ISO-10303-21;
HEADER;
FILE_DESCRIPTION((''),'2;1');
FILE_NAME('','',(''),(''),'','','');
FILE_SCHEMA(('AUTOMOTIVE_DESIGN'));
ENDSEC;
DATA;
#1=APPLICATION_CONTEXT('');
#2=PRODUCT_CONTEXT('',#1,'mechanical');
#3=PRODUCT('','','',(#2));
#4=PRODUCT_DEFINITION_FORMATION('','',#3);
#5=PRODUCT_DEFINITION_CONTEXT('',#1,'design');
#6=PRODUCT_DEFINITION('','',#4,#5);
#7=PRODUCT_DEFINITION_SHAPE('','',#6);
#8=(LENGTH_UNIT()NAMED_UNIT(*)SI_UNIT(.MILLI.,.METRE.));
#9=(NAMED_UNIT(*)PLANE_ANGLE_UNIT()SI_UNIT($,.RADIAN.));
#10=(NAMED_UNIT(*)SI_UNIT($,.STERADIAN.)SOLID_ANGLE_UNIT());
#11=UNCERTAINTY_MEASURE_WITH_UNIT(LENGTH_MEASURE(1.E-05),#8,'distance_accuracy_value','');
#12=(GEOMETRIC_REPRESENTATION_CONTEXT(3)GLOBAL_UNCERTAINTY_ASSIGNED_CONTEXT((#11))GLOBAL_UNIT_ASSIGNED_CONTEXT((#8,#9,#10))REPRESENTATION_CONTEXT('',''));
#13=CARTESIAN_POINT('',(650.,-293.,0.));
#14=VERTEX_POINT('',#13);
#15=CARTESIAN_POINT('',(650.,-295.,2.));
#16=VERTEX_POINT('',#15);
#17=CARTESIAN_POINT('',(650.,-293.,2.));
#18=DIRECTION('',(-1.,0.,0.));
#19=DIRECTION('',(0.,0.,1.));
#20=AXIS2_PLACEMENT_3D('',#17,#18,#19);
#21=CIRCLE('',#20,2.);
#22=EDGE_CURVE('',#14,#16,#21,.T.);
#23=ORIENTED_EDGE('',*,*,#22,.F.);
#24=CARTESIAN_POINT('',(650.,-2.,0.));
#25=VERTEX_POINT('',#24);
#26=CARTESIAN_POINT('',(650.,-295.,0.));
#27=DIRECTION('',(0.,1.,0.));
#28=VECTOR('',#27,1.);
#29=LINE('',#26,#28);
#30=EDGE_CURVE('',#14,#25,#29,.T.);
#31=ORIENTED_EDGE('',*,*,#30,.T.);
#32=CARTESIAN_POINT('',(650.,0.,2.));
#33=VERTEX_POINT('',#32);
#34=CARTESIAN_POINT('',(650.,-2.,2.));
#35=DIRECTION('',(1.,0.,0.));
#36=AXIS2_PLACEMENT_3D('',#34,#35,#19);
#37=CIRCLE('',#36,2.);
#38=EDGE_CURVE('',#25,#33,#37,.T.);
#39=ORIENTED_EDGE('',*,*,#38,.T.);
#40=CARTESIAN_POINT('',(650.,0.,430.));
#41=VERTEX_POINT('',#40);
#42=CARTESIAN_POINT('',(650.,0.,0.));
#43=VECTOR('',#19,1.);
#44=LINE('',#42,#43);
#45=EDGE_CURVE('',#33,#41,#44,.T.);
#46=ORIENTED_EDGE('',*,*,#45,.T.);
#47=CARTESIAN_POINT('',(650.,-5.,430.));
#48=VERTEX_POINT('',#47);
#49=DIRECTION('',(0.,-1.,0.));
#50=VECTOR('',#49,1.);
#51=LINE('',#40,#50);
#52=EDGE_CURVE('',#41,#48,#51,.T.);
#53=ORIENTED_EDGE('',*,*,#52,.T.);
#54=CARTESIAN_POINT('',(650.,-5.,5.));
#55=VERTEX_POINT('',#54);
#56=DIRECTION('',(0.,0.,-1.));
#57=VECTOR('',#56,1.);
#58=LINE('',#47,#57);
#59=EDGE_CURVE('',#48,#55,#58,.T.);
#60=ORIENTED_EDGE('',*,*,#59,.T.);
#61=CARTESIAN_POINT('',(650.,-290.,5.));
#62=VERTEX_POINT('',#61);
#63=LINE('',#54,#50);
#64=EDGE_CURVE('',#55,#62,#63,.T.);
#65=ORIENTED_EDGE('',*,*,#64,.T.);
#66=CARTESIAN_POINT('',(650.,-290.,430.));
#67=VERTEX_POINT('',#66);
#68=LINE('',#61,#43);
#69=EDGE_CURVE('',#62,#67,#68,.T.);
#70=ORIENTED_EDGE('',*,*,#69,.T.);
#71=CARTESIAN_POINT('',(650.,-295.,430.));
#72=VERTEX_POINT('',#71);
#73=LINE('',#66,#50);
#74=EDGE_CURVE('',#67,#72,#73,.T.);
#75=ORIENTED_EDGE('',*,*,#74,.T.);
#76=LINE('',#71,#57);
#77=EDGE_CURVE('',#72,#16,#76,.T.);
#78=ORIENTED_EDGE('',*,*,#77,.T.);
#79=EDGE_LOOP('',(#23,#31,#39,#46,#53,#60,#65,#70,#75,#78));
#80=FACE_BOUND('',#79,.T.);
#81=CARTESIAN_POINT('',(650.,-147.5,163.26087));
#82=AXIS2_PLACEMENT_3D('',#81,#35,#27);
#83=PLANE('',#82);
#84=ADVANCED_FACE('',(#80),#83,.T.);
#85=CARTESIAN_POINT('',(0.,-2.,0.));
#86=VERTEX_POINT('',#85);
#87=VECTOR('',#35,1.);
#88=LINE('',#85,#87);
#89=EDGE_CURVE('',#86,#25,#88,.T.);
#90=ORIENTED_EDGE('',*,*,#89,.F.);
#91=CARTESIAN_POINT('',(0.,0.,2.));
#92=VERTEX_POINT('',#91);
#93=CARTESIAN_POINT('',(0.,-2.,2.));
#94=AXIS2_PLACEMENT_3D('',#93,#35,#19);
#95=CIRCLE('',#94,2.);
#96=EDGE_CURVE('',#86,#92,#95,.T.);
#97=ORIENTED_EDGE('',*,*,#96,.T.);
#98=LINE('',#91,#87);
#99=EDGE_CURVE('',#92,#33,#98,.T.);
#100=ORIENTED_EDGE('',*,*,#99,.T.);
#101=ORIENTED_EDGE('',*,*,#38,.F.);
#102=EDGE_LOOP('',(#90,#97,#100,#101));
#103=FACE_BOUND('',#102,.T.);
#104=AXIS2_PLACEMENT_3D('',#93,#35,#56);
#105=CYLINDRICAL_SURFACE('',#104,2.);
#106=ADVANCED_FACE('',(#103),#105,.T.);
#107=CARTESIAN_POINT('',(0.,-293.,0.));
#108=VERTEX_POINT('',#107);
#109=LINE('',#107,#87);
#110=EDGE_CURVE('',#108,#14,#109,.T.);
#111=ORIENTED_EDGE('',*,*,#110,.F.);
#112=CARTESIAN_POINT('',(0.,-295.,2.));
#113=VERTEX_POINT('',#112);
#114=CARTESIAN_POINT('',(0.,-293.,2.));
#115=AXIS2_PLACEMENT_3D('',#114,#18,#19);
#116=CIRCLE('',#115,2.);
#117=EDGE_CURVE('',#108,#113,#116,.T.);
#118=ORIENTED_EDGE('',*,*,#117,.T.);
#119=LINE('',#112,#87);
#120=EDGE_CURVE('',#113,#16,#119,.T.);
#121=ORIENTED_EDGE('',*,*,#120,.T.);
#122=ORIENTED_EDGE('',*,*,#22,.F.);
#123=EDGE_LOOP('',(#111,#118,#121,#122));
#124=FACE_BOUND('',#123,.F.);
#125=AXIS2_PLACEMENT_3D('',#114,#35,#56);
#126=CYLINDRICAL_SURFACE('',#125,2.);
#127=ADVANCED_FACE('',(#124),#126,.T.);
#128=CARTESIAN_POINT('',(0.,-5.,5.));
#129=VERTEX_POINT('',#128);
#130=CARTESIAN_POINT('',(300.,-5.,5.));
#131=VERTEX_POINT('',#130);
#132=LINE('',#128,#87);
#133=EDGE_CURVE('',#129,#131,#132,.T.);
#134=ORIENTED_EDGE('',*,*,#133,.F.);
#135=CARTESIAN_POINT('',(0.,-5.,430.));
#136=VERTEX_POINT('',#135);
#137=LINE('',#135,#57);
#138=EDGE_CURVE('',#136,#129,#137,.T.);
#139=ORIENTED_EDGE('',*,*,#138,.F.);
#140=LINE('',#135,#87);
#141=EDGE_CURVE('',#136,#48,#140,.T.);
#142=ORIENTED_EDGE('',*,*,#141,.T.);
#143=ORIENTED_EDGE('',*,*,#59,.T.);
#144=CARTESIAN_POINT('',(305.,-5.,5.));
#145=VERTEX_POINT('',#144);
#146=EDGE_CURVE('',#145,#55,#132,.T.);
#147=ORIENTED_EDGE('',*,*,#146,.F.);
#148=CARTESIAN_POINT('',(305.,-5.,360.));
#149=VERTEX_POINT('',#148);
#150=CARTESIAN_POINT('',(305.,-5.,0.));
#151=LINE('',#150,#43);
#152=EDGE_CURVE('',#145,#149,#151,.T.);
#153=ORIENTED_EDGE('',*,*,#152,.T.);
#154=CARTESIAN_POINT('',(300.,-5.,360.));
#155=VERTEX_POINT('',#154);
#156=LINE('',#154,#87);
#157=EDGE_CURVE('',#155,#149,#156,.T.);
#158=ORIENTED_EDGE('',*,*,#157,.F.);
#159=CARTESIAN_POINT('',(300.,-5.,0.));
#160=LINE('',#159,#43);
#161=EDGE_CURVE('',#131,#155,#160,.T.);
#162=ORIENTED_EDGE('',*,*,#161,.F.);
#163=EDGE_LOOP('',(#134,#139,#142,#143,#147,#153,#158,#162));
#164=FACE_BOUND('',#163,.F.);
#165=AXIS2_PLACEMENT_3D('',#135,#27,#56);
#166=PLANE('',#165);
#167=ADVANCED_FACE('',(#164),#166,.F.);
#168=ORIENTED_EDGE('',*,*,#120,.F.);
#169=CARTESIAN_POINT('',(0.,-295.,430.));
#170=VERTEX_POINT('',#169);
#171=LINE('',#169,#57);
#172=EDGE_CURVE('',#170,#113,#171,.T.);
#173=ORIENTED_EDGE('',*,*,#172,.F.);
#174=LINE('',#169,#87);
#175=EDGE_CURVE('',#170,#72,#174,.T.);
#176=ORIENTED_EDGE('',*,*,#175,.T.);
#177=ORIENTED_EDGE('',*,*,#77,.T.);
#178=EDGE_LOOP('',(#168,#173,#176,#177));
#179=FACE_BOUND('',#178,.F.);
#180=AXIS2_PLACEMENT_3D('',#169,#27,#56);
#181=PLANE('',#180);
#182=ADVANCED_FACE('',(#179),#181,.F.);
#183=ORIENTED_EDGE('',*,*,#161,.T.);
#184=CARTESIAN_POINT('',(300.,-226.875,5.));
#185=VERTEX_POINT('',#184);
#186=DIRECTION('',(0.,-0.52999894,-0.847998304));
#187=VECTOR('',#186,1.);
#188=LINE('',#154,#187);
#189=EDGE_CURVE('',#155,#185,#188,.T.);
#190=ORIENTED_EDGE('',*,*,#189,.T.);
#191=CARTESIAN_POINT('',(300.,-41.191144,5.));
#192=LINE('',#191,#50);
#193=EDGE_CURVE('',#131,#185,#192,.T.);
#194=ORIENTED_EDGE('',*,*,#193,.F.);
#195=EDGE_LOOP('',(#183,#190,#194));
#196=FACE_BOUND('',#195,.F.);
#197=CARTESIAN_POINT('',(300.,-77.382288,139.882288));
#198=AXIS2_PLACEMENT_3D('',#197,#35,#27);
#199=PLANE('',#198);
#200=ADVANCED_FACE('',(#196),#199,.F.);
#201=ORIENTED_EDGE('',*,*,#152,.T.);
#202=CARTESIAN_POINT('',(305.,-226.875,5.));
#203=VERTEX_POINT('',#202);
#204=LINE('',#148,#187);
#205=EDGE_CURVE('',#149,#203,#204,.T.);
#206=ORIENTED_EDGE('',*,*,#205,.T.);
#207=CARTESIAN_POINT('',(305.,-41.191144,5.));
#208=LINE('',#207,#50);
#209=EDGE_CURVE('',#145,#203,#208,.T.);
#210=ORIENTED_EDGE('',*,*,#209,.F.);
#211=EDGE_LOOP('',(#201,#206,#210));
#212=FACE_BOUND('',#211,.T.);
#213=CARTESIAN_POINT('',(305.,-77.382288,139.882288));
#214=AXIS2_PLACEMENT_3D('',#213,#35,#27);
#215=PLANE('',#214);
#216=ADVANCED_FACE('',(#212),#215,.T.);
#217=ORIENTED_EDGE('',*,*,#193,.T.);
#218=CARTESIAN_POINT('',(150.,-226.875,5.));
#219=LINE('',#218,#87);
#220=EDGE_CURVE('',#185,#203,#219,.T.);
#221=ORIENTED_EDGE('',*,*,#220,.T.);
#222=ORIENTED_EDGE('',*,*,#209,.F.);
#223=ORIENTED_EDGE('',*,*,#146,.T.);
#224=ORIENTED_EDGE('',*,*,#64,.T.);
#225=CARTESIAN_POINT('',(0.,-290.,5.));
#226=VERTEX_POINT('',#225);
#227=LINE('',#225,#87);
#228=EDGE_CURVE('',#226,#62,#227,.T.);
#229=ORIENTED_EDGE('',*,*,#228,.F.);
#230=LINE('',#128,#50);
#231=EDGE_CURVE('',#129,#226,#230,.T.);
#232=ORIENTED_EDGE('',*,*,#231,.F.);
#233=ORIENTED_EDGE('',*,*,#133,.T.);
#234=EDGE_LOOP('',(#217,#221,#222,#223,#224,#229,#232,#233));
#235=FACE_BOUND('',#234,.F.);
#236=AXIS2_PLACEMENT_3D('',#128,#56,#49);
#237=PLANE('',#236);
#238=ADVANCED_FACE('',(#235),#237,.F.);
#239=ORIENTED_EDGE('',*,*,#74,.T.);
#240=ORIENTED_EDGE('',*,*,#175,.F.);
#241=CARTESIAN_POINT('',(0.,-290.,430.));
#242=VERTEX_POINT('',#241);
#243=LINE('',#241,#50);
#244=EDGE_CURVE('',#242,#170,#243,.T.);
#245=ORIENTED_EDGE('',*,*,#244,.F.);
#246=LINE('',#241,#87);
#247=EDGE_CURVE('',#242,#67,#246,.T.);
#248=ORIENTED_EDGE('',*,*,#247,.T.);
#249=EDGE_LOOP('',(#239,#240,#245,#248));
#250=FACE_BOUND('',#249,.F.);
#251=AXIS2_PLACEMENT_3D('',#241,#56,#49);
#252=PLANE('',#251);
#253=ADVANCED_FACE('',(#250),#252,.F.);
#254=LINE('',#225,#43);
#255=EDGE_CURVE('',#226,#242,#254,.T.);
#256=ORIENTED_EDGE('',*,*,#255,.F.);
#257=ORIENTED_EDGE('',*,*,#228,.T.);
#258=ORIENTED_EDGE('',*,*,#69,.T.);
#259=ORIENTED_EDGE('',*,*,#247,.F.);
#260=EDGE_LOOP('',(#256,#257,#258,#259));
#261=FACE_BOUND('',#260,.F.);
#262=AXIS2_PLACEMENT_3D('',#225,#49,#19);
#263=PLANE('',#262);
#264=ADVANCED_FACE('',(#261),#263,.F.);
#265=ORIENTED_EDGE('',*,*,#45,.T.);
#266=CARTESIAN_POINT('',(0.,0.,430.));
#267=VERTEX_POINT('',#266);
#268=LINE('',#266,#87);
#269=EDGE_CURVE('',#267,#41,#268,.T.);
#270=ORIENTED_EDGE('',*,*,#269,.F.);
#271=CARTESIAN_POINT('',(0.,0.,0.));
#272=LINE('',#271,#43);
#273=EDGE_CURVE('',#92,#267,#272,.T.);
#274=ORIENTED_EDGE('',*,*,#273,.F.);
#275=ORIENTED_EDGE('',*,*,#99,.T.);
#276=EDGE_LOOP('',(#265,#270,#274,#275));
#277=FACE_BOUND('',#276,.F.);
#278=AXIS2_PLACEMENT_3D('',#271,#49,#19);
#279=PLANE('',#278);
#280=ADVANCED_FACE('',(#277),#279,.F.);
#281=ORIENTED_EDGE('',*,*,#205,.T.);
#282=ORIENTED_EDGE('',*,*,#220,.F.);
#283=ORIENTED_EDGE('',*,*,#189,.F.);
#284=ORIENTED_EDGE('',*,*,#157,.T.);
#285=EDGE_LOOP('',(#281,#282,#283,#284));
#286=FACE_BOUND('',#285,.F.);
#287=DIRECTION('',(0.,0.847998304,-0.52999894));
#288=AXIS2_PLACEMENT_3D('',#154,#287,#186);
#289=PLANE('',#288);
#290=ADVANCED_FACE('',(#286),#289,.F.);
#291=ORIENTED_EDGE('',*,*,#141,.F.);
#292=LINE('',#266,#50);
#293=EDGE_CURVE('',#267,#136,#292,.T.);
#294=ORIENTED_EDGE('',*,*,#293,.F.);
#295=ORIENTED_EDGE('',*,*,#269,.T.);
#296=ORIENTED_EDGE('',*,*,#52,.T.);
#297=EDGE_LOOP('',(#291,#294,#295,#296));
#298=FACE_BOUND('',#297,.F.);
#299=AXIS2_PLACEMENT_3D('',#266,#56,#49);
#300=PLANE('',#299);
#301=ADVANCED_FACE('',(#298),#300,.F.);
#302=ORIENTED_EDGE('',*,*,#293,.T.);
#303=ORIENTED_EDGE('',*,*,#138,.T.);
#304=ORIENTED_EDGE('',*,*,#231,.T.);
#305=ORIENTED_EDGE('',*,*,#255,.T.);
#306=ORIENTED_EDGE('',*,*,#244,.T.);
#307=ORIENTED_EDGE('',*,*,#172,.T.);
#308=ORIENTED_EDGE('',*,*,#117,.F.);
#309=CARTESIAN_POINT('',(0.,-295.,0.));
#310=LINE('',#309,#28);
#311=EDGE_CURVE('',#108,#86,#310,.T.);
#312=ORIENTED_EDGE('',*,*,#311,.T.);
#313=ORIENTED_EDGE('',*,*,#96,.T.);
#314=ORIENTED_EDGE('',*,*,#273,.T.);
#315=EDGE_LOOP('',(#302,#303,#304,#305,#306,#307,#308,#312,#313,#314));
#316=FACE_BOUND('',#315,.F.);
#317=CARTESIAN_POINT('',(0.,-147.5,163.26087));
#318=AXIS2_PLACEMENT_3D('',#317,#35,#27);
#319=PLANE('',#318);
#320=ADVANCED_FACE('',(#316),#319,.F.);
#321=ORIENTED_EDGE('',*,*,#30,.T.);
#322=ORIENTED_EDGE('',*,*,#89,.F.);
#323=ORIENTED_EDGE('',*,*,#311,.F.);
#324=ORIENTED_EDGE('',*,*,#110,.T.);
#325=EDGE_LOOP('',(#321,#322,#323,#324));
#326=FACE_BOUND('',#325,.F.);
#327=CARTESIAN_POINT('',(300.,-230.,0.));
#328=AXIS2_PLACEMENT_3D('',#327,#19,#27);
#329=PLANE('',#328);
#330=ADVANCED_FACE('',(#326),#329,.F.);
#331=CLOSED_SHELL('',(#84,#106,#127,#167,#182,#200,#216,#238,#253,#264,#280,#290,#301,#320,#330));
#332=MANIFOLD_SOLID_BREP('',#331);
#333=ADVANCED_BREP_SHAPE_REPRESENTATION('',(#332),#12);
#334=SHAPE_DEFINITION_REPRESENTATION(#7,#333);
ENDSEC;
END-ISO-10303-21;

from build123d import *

# Parameters (mm, degrees)
F1_DEPTH = 650
F4_DEPTH = 5
F5_R     = 2


# Not quite as in the source:
# - a feature names something its author has since deleted; it is built from what else it names


with BuildPart() as f1:
    # F0 (on Right) → F1 (new body)
    with BuildSketch(Plane.YZ):
        Polygon((-295, 0), (0, 0), (0, 430), (-5, 430), (-5, 5), (-290, 5), (-290, 430), (-295, 430), align=None)
    extrude(amount=F1_DEPTH)

    # F3 (on offset) → F4 (join)
    with BuildSketch(Plane.YZ.offset(300)):
        Polygon((-230, 0), (-5, 0), (-5, 360), align=None)
    extrude(amount=F4_DEPTH)

    # F5
    f5_edges = [f1.edges().sort_by_distance(p)[0] for p in [
        (325, 0, 0),
        (325, -295, 0),
    ]]
    fillet(f5_edges, radius=F5_R)


solid = f1.part
